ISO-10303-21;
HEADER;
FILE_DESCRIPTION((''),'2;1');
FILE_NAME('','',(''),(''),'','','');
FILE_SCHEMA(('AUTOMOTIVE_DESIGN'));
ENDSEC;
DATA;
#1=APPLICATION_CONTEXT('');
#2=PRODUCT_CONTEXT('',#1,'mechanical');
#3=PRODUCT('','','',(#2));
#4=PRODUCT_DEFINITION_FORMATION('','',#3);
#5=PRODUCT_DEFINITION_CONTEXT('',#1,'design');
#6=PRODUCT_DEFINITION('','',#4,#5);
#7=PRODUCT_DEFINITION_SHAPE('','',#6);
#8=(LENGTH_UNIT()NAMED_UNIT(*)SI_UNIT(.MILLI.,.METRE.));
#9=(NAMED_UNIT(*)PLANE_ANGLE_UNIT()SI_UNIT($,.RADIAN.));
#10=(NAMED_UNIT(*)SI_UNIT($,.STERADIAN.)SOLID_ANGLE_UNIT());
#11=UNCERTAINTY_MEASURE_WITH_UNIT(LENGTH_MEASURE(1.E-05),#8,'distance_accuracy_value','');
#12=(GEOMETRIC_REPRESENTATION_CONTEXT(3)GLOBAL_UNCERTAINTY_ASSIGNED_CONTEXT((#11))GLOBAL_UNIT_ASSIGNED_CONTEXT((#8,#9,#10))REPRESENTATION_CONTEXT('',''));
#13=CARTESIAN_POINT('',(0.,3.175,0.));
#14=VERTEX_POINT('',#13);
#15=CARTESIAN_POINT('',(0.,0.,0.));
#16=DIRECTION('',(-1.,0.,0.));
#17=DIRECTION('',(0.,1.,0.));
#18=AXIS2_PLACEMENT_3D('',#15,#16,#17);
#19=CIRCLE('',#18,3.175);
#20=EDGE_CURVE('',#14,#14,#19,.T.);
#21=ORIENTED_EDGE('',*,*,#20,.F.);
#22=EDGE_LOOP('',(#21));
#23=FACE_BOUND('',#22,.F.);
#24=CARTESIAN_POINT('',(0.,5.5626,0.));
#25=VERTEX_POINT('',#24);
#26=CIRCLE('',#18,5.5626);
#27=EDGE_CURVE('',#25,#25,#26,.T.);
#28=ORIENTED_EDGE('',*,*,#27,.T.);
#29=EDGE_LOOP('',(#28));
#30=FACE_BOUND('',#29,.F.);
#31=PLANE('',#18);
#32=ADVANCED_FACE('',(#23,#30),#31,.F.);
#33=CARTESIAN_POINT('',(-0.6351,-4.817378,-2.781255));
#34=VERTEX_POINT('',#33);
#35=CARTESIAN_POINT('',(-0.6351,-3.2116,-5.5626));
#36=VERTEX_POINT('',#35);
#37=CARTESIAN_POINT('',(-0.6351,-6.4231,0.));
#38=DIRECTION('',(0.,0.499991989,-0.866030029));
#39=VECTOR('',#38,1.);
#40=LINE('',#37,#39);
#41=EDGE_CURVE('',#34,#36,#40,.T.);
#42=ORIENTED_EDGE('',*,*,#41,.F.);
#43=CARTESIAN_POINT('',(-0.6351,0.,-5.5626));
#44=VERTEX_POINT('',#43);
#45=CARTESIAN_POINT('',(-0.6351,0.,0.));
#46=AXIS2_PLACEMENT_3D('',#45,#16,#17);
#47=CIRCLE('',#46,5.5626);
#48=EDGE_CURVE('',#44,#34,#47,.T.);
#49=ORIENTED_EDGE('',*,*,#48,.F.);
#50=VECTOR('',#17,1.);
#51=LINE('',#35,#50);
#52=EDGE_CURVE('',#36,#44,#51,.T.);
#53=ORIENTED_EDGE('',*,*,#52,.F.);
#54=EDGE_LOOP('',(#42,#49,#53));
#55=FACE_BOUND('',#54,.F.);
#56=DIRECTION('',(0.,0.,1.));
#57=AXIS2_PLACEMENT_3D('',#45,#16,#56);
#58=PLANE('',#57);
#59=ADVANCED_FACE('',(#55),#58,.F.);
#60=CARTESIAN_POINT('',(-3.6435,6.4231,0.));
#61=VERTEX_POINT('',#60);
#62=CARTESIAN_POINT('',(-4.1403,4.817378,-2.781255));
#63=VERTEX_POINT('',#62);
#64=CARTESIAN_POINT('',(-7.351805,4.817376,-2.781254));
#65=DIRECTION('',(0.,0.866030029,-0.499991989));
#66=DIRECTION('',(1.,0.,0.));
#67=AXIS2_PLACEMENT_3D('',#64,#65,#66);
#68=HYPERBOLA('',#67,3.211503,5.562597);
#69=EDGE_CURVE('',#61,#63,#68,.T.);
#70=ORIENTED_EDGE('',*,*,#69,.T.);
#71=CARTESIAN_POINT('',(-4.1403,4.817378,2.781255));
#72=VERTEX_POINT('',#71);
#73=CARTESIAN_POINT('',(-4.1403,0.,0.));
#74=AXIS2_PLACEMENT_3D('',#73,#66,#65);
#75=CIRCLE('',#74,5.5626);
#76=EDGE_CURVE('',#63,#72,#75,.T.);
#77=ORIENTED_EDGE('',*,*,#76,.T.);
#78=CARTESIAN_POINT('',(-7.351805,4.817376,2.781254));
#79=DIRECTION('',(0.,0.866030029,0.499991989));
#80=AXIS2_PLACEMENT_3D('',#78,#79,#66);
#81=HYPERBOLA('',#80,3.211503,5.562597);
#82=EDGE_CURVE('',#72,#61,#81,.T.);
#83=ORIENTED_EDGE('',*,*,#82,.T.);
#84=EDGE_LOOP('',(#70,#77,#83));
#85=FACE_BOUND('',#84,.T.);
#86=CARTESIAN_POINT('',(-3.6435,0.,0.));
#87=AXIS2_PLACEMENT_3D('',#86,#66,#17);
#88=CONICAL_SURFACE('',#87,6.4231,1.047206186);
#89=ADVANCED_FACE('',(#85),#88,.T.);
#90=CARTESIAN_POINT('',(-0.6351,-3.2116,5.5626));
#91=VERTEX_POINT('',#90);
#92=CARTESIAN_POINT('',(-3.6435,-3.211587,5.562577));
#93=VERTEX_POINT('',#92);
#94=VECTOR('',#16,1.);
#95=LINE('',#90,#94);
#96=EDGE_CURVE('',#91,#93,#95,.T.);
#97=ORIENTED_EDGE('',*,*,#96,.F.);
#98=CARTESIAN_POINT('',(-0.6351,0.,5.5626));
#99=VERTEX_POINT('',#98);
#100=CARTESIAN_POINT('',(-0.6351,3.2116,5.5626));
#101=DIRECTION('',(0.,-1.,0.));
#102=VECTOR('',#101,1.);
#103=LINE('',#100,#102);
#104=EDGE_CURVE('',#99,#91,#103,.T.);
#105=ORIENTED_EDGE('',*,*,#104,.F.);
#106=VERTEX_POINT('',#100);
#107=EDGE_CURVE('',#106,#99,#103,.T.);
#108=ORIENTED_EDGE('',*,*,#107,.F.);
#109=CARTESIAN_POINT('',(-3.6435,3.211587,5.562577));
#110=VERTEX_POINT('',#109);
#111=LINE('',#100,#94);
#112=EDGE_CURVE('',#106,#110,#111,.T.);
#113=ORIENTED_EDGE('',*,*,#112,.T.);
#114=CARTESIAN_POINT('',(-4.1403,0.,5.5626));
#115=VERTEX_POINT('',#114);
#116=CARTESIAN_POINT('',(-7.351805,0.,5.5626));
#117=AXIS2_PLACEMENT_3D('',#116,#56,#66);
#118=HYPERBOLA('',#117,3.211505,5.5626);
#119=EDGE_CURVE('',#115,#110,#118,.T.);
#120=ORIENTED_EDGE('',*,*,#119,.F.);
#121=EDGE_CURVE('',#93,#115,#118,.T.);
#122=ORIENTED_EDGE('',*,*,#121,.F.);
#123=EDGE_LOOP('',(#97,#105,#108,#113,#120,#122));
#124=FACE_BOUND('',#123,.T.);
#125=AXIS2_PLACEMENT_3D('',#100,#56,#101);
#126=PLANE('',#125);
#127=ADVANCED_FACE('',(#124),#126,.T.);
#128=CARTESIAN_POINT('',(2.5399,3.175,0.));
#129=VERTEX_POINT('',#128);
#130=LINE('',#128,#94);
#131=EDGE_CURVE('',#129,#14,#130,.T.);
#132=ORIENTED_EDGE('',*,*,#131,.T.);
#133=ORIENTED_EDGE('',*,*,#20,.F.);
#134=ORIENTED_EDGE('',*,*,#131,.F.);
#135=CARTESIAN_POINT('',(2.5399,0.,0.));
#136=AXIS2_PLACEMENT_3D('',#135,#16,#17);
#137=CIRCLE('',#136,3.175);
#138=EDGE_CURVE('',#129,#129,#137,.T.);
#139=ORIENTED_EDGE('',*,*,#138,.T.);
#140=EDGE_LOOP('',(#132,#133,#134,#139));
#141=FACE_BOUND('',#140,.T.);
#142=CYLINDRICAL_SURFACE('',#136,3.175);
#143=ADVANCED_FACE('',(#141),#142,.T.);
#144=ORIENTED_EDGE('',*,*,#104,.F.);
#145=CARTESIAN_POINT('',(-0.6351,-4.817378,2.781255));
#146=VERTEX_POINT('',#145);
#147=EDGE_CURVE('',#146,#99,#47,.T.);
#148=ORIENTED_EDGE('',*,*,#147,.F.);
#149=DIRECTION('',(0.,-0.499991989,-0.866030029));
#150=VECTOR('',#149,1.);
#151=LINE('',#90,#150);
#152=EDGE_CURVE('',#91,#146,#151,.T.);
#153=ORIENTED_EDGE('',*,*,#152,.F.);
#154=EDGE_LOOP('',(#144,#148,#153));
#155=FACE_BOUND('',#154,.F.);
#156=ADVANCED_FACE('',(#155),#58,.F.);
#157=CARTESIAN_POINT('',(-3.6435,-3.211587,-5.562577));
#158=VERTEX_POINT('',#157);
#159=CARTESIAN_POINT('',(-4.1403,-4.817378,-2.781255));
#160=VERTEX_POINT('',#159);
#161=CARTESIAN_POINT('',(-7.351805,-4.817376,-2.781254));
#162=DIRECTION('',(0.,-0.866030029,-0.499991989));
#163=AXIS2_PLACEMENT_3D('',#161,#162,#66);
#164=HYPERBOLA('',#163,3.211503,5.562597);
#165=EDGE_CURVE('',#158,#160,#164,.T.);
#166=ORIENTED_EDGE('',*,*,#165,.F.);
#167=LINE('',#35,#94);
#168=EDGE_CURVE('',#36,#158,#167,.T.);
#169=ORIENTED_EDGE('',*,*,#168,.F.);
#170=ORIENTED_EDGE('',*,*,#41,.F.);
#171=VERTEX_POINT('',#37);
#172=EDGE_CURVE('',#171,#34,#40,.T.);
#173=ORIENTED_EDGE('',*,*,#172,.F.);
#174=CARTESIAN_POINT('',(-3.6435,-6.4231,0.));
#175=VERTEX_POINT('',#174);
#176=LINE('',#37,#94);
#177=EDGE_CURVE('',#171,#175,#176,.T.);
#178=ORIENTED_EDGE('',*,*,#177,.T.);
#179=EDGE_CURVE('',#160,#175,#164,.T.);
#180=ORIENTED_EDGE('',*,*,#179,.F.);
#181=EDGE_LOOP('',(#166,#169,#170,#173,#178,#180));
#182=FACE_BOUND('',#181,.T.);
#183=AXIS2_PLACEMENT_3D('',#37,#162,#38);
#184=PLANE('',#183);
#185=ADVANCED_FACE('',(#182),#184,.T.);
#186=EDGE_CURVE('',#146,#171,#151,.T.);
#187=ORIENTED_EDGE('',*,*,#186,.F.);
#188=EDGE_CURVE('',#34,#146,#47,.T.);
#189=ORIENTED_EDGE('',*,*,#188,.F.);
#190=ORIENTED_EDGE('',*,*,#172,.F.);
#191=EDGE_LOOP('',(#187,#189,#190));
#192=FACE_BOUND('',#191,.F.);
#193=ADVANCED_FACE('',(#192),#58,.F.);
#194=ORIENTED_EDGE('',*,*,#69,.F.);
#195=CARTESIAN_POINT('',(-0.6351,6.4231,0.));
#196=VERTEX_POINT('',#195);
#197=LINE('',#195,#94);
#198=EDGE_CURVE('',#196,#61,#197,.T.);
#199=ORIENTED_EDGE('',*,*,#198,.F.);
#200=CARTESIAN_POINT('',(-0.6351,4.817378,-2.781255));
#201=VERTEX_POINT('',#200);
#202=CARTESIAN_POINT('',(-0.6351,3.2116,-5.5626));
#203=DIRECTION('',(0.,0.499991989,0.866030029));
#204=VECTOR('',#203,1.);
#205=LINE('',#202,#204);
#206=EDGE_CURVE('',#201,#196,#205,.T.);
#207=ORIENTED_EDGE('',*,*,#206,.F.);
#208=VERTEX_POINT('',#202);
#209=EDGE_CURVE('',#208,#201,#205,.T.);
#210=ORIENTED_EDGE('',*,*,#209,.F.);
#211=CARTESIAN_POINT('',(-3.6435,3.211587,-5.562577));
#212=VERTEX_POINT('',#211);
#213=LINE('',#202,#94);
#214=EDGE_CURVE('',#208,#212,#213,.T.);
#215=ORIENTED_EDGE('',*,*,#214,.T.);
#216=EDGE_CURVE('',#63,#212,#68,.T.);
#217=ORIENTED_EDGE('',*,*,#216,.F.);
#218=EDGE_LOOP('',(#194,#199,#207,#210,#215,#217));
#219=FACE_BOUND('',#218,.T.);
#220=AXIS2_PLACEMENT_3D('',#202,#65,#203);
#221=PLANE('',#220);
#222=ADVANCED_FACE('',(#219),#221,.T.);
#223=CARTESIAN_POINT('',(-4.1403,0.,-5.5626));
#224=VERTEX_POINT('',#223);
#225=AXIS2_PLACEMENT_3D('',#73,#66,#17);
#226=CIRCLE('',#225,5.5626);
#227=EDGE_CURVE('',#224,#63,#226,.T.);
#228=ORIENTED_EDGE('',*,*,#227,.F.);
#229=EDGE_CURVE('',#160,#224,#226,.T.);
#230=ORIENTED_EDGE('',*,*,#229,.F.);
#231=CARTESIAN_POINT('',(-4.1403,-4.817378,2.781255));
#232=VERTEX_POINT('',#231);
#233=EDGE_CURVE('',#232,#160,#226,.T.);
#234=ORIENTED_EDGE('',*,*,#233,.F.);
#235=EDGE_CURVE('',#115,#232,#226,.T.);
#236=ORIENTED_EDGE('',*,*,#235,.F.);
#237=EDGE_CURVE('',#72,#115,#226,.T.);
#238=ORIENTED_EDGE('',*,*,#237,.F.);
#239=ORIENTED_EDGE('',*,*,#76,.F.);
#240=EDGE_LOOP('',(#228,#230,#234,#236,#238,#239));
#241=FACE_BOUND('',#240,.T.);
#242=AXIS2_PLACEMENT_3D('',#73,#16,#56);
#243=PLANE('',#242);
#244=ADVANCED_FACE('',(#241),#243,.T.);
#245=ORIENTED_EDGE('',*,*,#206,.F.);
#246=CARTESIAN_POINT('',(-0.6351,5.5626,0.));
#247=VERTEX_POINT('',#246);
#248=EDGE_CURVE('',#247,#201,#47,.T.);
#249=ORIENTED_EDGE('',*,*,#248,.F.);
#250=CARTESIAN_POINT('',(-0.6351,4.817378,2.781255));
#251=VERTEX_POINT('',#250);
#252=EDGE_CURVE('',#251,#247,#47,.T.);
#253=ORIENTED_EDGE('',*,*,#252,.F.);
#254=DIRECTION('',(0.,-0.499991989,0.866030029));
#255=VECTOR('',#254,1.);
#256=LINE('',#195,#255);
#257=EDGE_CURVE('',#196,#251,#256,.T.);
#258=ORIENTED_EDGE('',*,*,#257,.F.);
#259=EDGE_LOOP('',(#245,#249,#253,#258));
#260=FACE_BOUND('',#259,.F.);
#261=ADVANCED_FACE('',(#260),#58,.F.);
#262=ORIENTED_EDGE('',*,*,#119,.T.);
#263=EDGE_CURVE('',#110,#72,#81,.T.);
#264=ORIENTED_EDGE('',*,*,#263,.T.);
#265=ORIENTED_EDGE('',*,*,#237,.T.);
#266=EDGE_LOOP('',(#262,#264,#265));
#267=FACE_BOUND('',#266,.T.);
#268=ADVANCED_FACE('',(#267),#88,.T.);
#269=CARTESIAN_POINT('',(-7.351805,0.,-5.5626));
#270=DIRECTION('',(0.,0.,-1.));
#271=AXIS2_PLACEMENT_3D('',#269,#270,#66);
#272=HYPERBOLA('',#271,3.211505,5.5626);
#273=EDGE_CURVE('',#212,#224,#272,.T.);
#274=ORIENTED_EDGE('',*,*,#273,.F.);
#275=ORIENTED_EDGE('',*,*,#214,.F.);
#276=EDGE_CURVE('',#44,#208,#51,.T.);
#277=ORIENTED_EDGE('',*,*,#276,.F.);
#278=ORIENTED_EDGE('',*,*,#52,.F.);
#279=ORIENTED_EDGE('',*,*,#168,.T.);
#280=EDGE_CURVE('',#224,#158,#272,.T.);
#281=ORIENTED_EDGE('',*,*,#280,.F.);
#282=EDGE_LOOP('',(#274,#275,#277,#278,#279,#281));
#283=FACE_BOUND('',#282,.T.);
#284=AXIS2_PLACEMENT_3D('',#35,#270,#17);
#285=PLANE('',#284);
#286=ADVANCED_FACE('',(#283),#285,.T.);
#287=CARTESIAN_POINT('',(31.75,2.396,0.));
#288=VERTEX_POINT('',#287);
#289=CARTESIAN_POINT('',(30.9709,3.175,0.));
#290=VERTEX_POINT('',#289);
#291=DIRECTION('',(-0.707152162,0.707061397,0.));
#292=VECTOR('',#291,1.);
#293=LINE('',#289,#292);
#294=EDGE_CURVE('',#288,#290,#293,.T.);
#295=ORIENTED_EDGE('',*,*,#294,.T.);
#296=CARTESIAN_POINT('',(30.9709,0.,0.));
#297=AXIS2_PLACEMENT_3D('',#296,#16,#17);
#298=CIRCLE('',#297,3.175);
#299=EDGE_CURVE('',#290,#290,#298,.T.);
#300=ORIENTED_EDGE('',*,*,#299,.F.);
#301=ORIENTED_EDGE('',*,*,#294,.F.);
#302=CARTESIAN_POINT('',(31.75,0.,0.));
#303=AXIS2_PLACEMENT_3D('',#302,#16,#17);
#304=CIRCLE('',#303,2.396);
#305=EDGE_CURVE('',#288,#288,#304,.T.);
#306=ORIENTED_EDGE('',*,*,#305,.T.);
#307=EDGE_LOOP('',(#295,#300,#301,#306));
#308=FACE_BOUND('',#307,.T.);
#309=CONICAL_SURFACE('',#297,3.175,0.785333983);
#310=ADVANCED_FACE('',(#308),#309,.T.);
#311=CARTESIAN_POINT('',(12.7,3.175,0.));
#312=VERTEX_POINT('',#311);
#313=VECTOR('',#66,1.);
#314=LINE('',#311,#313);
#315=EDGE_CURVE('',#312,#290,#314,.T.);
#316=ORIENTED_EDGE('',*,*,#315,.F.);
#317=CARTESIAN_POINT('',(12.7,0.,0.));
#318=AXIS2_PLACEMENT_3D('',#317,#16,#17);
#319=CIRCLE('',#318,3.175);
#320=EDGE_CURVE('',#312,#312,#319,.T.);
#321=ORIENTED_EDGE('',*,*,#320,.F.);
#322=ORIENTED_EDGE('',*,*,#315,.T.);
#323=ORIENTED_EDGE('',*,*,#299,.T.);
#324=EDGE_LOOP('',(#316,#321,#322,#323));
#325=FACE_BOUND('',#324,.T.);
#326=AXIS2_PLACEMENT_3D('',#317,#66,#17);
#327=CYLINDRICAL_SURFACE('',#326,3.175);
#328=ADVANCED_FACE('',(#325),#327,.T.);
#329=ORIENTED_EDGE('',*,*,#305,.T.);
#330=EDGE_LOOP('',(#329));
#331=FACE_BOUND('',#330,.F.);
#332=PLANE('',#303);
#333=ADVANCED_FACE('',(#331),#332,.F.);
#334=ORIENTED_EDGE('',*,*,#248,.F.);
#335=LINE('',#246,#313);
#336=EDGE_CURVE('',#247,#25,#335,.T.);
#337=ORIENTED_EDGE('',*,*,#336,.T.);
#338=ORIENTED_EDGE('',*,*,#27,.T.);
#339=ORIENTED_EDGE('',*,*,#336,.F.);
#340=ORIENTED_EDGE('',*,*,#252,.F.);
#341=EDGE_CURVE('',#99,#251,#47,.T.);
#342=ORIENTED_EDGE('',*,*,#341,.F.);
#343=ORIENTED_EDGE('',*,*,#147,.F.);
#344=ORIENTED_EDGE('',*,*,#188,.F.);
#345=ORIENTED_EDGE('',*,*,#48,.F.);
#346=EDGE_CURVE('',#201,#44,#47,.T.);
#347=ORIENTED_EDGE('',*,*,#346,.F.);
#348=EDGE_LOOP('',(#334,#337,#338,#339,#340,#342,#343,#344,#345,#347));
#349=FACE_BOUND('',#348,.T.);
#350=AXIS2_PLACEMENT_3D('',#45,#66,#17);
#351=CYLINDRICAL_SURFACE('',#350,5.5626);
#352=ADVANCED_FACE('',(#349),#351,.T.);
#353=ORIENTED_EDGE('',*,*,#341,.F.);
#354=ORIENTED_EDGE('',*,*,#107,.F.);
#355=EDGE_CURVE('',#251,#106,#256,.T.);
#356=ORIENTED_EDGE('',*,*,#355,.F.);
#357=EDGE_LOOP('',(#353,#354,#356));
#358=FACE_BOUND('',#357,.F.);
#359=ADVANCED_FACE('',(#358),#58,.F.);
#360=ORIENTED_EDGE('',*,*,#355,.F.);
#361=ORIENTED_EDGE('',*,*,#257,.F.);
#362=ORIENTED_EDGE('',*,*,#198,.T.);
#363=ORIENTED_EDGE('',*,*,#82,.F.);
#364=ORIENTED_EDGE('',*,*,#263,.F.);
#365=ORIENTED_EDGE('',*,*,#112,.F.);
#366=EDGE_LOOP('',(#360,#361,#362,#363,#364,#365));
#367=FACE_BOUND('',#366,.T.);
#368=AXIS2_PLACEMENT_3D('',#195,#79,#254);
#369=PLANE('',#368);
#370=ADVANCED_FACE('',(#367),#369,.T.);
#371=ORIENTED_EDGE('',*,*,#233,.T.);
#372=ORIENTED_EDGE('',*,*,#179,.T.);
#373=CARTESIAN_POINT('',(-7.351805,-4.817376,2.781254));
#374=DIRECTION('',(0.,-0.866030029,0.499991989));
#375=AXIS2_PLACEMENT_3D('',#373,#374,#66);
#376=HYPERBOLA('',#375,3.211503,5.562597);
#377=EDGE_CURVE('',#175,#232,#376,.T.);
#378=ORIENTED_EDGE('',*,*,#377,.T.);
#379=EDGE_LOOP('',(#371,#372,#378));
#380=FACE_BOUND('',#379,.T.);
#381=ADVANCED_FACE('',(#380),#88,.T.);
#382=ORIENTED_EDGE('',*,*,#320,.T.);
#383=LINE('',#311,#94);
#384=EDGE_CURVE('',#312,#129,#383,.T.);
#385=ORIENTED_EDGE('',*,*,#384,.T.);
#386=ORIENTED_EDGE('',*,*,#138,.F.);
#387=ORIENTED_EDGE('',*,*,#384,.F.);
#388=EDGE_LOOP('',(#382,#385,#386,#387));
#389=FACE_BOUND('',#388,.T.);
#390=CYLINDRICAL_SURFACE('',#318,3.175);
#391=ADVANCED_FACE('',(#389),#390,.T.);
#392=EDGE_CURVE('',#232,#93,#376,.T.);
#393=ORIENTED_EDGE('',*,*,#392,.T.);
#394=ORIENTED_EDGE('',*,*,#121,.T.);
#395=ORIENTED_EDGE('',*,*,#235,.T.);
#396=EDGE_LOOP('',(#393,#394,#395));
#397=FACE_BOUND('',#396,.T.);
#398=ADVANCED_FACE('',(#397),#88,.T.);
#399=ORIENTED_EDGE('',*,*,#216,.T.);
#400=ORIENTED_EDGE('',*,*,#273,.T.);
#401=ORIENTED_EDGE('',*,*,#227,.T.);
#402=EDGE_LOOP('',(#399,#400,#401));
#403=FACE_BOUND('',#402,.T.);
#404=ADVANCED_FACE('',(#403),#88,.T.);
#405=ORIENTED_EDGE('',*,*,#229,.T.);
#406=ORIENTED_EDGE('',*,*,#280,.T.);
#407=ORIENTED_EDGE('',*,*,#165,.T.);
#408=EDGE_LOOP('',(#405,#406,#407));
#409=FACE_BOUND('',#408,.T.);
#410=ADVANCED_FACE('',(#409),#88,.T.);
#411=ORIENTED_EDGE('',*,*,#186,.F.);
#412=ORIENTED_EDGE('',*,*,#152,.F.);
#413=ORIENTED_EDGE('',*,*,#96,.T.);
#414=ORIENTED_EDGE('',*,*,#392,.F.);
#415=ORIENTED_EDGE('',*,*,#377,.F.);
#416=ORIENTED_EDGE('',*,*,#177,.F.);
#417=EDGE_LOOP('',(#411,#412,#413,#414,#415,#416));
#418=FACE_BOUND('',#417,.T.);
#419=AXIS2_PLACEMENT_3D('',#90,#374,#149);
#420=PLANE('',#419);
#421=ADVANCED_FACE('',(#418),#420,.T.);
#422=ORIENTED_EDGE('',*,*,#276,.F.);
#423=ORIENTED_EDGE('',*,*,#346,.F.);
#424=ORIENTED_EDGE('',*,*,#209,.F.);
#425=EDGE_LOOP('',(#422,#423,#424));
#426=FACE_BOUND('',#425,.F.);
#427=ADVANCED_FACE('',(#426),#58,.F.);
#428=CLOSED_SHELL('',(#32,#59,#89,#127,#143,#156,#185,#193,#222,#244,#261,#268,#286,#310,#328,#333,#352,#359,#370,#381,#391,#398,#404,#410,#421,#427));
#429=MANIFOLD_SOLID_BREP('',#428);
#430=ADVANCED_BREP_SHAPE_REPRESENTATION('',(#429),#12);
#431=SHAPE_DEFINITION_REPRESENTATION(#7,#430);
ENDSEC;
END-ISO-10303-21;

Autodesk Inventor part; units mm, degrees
ref_plane "YZ Plane" through (0, 0, 0) normal (1, 0, 0) x (0, 1, 0)
ref_plane "XZ Plane" through (0, 0, 0) normal (0, 1, 0) x (-1, 0, 0)
sketch "Sketch1" plane through (0, 0, 0) normal (0, 0, 1) x (1, 0, 0)
  line L0 (0, 5.5626) -> (0, 3.175)
  line L1 (12.7, 3.175) -> (31.75, 3.175)
  line L2 (31.75, 3.175) -> (31.75, 0)
  line L3 (31.75, 0) -> (-0.6351, 0)
  line L4 (-7.1121, 0) -> (38.227, 0) projected
  line L5 (-0.6351, 0) -> (-0.6351, 5.5626)
  line L6 (-0.6351, 5.5626) -> (0, 5.5626)
  line L7 (12.7, 3.175) -> (2.5399, 3.175)
  line L8 (2.5399, 3.175) -> (0, 3.175)
  line L9 (0, -1.1125) -> (0, 6.6751) projected
  dimension "d0" = 31.75
  dimension "d1" = 19.05
  dimension "d2" = 6.35
  dimension "d9" = 0.6351
  dimension "d10" = 11.1252
  dimension "d13" = 10.1601
  dimension "d14" = 6.35
revolve "Body" add sketch "Sketch1" angle 360 about axis through (31.75, 0, 0) along (-1, 0, 0)
sketch "Sketch2" plane through (-0.6351, 0, 0) normal (-1, 0, 0) x (0, 0, 1)
  line L0 (0, 6.4231) -> (5.5626, 3.2116)
  line L1 (5.5626, 3.2116) -> (5.5626, -3.2116)
  line L2 (5.5626, -3.2116) -> (0, -6.4231)
  line L3 (0, -6.4231) -> (-5.5626, -3.2116)
  line L4 (-5.5626, -3.2116) -> (-5.5626, 3.2116)
  line L5 (-5.5626, 3.2116) -> (0, 6.4231)
  point P0 (0, 0)
  point P1 (0, 0)
  dimension "d11" = 11.1252
extrude "Head" add sketch "Sketch2" along normal blind 3.5052
sketch "Sketch4" plane through (0, 0, 0) normal (0, 0, 1) x (1, 0, 0)
  line L0 (-4.1403, 5.5626) -> (-4.1403, 6.4231)
  line L1 (-4.1403, 6.4231) -> (-3.6435, 6.4231)
  line L2 (-3.6435, 6.4231) -> (-4.1403, 5.5626)
  line L3 (-4.8413, 0) -> (0.0659, 0) projected
  line L4 (-0.6351, 6.4231) -> (-4.1403, 6.4231) projected
  line L5 (-4.1403, 3.2116) -> (-4.1403, 6.4231) projected
  dimension "d5" = 30
  dimension "d19" = 11.1252
revolve "Chamfer1" cut sketch "Sketch4" angle 360 about axis through (-10, 0, 0) along (1, 0, 0)
thread "Thread" size "1/4-20 UNC" class "2A" standard "ANSI Unified Screw Threads" length 19.05
chamfer "Chamfer2" distance 0.779 distance2 0.7791 1 edges at (31.75, -3.175, 0) measured on face at (31.75, 0.3185, 0.8814)
ref_plane "Work Plane1" through (1.525, 0, 0) normal (0, 0, 1) x (1, 0, 0)
equation "\"d0\" = NLG"
equation "\"d1\" = GEL"
equation "\"d2\" = GD"
equation "\"d10\" = SD2"
equation "\"d14\" = BDM"
equation "\"d11\" = SW"
equation "\"d3\" = KOH - SD"
equation "\"d5\" = ANG1"
equation "\"d19\" = SW0"
equation "\"d15\" = GEL"
equation "\"d6\" = -0.5 * SPD + 0.5 * GD"
equation "\"NLG\" = 31.75"
equation "\"GD\" = 6.35"
equation "\"BDM\" = 6.35"
equation "\"KOH\" = 4.1402"
equation "\"GEL\" = 19.05"
equation "\"SW\" = 11.1252"
equation "\"SW0\" = SW"
equation "\"SPD\" = GD1"
equation "\"SD2\" = SW"
equation "\"SD\" = 0.635"
equation "\"ANG1\" = 30deg"
equation "\"GAL\" = 10.16"
equation "\"GUL\" = 0.77902"
equation "\"RR\" = 0.381"
equation "\"WFT\" = SD"
equation "\"GD1\" = 4.79196"
equation "\"THREADDIA\" = 6.35"
equation "\"SDH\" = SW"
equation "\"SDHG\" = 2.54"
equation "\"TOA\" = 30deg"
equation "\"FAWI\" = 45deg"
equation "\"NND\" = 6.35"
equation "\"E0\" = 12.84961"
properties part number "AS 2465 - 1/4 x 1 1/4  UNC" material "Steel, Mild"
